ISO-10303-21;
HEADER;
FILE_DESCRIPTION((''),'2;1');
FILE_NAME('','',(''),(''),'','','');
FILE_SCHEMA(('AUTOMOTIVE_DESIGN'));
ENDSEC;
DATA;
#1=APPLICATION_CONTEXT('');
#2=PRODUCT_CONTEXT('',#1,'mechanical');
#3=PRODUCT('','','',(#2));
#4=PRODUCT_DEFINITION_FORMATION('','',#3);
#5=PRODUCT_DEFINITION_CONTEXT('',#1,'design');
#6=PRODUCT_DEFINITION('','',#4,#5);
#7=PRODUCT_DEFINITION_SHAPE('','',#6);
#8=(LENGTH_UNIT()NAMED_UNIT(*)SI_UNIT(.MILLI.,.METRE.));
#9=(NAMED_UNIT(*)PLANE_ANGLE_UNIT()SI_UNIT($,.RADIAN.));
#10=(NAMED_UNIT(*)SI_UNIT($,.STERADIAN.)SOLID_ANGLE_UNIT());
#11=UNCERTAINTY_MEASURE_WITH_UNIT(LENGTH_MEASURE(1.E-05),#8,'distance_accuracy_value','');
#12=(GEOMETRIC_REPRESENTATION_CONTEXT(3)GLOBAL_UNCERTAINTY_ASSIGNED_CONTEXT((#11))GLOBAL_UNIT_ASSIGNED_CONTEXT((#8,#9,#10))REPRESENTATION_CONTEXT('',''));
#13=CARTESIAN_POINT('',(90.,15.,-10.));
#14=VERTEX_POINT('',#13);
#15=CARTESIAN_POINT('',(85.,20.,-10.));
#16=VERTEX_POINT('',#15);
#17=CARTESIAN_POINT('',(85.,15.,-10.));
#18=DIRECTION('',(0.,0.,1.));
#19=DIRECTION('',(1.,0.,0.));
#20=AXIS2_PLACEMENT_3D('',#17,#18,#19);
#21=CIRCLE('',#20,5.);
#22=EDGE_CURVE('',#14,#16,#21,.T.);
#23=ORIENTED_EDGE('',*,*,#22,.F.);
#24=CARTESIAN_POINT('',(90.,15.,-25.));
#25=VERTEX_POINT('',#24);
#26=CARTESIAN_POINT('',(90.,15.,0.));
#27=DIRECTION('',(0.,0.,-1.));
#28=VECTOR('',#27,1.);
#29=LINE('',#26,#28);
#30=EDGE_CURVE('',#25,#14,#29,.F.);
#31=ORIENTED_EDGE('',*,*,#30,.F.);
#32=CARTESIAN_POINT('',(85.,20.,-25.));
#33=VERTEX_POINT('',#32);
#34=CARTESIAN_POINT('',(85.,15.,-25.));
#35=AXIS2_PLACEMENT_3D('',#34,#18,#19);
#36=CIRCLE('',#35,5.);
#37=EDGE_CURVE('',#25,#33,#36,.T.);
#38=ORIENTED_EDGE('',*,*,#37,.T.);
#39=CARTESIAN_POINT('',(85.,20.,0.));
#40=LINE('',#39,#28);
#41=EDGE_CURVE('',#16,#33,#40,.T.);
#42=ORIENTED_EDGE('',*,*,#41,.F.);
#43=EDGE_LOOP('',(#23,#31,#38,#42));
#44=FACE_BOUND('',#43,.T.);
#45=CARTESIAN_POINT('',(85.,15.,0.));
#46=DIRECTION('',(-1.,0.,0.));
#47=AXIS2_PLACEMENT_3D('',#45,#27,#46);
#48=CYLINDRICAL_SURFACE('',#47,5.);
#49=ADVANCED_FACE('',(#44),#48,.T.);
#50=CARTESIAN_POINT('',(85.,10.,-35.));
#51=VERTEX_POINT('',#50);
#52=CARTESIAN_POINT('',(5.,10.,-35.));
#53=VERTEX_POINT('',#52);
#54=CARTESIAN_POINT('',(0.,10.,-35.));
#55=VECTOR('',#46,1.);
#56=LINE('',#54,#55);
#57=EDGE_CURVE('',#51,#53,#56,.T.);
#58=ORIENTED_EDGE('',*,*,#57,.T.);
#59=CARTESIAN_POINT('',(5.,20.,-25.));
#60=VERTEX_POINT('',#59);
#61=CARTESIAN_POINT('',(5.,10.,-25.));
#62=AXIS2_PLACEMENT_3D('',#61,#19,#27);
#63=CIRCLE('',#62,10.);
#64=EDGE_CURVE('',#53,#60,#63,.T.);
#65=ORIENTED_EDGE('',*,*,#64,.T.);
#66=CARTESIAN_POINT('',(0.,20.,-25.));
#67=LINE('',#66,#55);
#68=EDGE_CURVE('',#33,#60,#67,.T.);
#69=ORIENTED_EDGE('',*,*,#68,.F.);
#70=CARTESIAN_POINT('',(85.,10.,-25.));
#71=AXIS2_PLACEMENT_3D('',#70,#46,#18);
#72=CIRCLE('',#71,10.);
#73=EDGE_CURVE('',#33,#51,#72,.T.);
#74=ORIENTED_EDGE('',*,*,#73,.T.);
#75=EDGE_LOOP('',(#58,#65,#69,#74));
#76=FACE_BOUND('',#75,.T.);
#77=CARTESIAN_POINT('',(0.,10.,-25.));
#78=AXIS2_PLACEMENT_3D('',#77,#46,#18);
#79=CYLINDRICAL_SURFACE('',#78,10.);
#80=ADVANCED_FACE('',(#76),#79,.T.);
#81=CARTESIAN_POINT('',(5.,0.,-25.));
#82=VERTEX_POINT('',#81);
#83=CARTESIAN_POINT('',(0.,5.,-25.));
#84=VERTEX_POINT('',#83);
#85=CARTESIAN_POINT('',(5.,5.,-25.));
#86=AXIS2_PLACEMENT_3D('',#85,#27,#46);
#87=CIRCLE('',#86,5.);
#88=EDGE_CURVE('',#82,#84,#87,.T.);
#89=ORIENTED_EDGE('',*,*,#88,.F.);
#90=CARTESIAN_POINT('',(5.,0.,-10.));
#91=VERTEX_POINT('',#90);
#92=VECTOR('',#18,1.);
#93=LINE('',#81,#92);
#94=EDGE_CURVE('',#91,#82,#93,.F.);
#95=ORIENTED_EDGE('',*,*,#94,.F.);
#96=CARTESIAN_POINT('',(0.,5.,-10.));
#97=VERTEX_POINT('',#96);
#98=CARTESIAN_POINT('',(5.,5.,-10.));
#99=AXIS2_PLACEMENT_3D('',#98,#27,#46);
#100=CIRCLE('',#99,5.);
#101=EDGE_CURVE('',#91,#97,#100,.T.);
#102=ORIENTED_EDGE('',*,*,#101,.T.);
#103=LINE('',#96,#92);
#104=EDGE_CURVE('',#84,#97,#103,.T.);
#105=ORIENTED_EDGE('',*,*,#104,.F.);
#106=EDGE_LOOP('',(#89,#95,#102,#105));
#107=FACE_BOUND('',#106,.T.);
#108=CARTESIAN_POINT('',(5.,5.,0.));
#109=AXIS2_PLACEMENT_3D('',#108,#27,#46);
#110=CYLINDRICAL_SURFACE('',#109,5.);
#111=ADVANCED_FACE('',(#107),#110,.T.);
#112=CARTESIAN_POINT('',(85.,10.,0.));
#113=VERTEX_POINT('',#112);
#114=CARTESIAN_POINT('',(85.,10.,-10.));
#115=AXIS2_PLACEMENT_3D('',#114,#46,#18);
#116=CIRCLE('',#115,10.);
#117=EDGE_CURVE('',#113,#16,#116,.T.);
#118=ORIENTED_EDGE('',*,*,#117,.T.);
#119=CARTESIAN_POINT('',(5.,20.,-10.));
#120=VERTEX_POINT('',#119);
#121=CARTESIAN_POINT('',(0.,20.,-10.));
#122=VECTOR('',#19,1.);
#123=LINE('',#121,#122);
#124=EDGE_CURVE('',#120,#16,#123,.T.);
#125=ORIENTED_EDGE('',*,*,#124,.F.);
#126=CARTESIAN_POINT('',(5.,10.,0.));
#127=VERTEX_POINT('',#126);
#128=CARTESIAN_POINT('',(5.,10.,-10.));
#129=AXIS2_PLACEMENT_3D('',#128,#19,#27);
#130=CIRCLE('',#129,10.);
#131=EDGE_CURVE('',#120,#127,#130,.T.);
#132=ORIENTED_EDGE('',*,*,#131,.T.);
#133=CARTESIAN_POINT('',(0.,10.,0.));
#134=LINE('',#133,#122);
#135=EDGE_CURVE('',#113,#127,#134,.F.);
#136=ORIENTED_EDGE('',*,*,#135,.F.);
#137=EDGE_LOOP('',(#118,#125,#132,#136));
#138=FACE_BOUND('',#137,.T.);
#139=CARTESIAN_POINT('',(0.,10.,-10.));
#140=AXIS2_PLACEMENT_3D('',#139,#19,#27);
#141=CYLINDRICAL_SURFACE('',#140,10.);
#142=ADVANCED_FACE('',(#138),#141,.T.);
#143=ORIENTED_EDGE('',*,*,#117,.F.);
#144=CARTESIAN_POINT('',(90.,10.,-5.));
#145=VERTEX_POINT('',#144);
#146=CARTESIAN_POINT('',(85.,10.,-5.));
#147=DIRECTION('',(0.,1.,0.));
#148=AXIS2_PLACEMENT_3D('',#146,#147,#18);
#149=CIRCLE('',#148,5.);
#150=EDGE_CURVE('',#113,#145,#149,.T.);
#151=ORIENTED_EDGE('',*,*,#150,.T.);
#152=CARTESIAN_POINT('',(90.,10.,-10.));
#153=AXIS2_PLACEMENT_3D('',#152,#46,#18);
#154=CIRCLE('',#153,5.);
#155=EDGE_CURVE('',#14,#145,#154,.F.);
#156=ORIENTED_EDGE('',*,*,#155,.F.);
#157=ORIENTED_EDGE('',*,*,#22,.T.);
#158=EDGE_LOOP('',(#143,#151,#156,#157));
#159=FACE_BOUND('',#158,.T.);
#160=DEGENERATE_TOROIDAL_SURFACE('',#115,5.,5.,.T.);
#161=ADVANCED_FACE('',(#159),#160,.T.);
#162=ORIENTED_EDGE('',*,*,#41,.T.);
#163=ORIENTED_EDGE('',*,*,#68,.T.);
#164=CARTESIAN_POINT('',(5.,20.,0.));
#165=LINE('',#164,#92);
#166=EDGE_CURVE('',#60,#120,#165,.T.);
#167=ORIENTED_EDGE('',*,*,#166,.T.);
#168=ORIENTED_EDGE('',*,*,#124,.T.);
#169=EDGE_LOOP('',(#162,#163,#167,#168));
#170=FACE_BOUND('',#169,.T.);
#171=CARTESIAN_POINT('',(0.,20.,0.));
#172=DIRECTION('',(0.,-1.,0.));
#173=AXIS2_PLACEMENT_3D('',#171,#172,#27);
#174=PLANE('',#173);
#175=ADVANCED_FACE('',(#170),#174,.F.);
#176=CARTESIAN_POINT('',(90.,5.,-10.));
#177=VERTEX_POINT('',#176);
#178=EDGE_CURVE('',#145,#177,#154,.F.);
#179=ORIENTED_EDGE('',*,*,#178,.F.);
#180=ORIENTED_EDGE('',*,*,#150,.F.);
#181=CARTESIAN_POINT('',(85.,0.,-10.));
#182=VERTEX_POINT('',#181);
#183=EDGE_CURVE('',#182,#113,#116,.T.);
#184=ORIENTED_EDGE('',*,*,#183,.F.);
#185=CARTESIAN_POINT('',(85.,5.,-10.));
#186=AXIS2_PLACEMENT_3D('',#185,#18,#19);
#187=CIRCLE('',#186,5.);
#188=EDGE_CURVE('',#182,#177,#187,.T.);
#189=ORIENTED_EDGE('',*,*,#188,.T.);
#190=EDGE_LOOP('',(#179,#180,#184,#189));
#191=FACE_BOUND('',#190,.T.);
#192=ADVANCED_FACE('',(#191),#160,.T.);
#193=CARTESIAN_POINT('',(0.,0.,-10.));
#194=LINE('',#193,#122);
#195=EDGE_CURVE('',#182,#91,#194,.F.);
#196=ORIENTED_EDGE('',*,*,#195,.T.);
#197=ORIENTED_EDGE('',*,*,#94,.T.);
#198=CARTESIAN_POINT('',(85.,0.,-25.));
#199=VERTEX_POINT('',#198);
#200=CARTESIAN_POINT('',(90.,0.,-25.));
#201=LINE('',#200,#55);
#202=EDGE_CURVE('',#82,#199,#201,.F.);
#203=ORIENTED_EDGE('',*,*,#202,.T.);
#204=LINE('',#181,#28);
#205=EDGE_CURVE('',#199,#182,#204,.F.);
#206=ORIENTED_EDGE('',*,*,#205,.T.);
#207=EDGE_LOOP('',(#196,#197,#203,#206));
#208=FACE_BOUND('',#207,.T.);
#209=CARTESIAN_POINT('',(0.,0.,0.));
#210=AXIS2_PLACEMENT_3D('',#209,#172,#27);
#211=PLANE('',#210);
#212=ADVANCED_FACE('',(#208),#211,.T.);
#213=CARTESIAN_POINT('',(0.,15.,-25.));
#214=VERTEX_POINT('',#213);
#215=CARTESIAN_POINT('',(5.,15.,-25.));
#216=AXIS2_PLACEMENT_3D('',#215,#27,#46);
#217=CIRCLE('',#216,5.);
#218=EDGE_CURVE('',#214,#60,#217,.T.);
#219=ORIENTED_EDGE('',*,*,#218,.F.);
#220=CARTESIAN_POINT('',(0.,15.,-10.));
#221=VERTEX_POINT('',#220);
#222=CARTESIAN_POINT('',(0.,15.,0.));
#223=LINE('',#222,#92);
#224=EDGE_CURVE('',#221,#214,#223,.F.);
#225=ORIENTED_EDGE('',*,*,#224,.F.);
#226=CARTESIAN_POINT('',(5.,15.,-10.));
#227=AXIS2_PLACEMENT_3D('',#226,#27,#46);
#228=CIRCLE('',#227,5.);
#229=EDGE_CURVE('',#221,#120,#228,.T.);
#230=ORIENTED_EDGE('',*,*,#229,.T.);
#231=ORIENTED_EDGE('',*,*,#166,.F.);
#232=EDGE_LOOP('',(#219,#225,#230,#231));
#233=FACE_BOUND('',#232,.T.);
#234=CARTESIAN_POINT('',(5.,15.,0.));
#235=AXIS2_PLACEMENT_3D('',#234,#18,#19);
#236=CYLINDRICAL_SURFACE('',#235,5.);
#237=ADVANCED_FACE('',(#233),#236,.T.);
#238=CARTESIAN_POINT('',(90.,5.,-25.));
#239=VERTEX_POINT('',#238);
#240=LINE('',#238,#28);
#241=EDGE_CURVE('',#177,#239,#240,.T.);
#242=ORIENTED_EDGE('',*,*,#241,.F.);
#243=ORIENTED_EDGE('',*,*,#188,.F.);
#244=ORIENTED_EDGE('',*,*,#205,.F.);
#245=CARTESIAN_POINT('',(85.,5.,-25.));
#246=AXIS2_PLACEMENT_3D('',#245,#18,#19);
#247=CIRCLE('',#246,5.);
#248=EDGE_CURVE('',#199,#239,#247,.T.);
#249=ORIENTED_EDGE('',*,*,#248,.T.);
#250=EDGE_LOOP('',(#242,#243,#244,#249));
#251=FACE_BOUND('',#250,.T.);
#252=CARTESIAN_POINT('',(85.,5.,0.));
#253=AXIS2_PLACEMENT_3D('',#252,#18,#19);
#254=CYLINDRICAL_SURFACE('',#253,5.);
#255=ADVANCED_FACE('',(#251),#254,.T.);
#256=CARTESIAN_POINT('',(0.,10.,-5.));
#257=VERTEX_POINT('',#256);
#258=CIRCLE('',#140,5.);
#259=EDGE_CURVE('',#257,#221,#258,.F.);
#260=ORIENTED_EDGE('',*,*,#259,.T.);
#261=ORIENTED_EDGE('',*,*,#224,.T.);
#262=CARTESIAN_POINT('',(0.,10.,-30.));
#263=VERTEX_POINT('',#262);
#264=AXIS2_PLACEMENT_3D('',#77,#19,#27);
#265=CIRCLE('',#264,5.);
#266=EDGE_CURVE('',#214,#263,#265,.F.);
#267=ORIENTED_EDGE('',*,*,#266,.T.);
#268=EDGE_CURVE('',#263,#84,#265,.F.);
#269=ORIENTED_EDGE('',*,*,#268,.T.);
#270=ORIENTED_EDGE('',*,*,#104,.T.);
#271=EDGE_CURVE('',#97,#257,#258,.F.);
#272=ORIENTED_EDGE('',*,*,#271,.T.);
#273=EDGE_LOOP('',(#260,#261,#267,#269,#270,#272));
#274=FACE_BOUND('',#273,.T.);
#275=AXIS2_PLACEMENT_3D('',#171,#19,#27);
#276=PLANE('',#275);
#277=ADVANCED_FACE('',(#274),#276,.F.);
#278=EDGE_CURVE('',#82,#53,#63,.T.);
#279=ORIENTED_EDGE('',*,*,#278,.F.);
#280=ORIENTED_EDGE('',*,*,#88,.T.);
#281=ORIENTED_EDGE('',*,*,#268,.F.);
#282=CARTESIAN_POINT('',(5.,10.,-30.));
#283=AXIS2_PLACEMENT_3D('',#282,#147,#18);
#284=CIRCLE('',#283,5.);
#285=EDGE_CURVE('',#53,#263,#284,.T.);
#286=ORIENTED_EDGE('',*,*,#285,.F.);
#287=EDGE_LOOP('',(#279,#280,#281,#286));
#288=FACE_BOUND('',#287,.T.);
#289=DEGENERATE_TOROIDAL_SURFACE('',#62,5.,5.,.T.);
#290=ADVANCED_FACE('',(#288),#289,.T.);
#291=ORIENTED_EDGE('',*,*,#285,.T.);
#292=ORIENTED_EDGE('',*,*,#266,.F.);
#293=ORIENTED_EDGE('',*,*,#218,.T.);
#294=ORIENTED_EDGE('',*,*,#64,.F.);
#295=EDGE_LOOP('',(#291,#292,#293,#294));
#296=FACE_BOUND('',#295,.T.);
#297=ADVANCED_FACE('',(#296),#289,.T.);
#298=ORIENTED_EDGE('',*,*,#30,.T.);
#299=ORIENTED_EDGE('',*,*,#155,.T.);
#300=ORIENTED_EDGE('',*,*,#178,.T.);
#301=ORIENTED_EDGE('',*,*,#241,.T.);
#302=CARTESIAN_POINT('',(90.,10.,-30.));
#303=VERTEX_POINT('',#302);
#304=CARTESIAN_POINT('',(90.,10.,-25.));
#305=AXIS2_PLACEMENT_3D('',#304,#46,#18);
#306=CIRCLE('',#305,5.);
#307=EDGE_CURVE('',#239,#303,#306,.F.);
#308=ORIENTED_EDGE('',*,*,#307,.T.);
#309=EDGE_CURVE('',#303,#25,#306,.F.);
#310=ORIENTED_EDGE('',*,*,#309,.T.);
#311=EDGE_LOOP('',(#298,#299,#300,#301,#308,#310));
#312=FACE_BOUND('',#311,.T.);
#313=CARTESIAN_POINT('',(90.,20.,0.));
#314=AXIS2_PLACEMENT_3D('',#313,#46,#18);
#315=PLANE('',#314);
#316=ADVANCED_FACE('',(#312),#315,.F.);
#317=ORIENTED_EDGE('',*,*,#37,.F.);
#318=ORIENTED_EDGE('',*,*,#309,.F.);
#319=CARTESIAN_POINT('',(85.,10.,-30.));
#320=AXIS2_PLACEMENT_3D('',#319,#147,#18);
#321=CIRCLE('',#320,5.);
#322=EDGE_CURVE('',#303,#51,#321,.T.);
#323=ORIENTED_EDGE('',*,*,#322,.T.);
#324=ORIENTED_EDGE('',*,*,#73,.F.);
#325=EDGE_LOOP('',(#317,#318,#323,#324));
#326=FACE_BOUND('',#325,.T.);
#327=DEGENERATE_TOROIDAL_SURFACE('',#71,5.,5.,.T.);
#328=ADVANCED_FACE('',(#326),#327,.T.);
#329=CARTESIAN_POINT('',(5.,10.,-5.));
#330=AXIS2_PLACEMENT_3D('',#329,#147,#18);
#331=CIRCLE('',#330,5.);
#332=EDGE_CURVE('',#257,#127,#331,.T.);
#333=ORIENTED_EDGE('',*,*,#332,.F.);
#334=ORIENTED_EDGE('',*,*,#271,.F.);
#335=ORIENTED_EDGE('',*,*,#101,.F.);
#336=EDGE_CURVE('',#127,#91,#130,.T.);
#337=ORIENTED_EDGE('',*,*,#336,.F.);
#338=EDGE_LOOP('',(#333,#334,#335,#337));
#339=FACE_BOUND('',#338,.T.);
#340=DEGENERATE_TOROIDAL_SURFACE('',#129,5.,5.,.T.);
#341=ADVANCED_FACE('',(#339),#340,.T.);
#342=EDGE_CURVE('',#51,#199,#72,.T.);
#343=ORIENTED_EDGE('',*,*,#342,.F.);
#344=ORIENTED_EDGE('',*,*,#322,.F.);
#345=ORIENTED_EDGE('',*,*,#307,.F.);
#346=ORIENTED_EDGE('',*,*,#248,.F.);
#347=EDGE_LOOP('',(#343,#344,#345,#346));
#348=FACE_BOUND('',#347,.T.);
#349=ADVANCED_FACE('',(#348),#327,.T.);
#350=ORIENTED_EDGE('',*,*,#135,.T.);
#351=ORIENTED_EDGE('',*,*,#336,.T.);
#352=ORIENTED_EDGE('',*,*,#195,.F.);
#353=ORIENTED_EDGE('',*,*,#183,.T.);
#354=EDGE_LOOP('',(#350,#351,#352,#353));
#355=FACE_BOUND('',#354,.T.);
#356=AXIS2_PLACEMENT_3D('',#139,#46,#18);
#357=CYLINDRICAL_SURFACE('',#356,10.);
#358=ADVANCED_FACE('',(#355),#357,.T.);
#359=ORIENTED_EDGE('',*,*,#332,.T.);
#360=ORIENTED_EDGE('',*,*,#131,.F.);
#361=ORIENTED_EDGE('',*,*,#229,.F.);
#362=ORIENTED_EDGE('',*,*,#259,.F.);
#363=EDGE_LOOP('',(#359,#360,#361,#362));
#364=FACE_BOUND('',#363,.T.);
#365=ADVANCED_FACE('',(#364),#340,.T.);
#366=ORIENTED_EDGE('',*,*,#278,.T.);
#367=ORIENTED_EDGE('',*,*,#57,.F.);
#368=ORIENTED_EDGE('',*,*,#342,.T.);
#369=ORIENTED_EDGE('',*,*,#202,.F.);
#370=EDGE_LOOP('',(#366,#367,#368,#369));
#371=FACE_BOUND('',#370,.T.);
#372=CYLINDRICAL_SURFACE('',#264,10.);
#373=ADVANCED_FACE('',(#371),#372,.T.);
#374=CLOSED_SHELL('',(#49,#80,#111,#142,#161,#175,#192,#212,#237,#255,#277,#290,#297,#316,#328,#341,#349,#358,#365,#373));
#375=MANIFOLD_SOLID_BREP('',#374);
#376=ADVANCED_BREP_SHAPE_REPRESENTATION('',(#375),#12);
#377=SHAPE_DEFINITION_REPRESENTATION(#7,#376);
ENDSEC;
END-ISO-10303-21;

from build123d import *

# Parameters (mm, degrees)
SKETCH1_W           = 90
SKETCH1_H           = 35
BOSS_EXTRUDE1_DEPTH = 20
FILLET1_R           = 10
FILLET2_R           = 5


with BuildPart() as part:
    # Sketch1 → Boss-Extrude1 (new body)
    with BuildSketch(Plane(origin=(0, 0, 0), x_dir=(1, 0, 0), z_dir=(0, 1, 0))):
        with Locations((45, 17.5)):
            Rectangle(SKETCH1_W, SKETCH1_H)
    extrude(amount=BOSS_EXTRUDE1_DEPTH)

    # Fillet1
    fillet1_edges = [part.edges().sort_by_distance(p)[0] for p in [
        (45, 20, -35),
        (45, 0, -35),
        (45, 0, 0),
        (45, 20, 0),
    ]]
    fillet(fillet1_edges, radius=FILLET1_R - 0.0001)  # a hair under: the kernel refuses the full size

    # Fillet2
    fillet2_edges = [part.edges().sort_by_distance(p)[0] for p in [
        (0, 20, -17.5),
        (90, 20, -17.5),
        (0, 0, -17.5),
        (0, 17.071097101, -2.928902899),
        (0, 2.928902899, -2.928902899),
        (0, 2.928902899, -32.071097101),
        (0, 17.071097101, -32.071097101),
        (90, 0, -17.5),
        (90, 17.071097101, -2.928902899),
        (90, 2.928902899, -2.928902899),
        (90, 2.928902899, -32.071097101),
        (90, 17.071097101, -32.071097101),
    ]]
    fillet(fillet2_edges, radius=FILLET2_R)


solid = part.part
